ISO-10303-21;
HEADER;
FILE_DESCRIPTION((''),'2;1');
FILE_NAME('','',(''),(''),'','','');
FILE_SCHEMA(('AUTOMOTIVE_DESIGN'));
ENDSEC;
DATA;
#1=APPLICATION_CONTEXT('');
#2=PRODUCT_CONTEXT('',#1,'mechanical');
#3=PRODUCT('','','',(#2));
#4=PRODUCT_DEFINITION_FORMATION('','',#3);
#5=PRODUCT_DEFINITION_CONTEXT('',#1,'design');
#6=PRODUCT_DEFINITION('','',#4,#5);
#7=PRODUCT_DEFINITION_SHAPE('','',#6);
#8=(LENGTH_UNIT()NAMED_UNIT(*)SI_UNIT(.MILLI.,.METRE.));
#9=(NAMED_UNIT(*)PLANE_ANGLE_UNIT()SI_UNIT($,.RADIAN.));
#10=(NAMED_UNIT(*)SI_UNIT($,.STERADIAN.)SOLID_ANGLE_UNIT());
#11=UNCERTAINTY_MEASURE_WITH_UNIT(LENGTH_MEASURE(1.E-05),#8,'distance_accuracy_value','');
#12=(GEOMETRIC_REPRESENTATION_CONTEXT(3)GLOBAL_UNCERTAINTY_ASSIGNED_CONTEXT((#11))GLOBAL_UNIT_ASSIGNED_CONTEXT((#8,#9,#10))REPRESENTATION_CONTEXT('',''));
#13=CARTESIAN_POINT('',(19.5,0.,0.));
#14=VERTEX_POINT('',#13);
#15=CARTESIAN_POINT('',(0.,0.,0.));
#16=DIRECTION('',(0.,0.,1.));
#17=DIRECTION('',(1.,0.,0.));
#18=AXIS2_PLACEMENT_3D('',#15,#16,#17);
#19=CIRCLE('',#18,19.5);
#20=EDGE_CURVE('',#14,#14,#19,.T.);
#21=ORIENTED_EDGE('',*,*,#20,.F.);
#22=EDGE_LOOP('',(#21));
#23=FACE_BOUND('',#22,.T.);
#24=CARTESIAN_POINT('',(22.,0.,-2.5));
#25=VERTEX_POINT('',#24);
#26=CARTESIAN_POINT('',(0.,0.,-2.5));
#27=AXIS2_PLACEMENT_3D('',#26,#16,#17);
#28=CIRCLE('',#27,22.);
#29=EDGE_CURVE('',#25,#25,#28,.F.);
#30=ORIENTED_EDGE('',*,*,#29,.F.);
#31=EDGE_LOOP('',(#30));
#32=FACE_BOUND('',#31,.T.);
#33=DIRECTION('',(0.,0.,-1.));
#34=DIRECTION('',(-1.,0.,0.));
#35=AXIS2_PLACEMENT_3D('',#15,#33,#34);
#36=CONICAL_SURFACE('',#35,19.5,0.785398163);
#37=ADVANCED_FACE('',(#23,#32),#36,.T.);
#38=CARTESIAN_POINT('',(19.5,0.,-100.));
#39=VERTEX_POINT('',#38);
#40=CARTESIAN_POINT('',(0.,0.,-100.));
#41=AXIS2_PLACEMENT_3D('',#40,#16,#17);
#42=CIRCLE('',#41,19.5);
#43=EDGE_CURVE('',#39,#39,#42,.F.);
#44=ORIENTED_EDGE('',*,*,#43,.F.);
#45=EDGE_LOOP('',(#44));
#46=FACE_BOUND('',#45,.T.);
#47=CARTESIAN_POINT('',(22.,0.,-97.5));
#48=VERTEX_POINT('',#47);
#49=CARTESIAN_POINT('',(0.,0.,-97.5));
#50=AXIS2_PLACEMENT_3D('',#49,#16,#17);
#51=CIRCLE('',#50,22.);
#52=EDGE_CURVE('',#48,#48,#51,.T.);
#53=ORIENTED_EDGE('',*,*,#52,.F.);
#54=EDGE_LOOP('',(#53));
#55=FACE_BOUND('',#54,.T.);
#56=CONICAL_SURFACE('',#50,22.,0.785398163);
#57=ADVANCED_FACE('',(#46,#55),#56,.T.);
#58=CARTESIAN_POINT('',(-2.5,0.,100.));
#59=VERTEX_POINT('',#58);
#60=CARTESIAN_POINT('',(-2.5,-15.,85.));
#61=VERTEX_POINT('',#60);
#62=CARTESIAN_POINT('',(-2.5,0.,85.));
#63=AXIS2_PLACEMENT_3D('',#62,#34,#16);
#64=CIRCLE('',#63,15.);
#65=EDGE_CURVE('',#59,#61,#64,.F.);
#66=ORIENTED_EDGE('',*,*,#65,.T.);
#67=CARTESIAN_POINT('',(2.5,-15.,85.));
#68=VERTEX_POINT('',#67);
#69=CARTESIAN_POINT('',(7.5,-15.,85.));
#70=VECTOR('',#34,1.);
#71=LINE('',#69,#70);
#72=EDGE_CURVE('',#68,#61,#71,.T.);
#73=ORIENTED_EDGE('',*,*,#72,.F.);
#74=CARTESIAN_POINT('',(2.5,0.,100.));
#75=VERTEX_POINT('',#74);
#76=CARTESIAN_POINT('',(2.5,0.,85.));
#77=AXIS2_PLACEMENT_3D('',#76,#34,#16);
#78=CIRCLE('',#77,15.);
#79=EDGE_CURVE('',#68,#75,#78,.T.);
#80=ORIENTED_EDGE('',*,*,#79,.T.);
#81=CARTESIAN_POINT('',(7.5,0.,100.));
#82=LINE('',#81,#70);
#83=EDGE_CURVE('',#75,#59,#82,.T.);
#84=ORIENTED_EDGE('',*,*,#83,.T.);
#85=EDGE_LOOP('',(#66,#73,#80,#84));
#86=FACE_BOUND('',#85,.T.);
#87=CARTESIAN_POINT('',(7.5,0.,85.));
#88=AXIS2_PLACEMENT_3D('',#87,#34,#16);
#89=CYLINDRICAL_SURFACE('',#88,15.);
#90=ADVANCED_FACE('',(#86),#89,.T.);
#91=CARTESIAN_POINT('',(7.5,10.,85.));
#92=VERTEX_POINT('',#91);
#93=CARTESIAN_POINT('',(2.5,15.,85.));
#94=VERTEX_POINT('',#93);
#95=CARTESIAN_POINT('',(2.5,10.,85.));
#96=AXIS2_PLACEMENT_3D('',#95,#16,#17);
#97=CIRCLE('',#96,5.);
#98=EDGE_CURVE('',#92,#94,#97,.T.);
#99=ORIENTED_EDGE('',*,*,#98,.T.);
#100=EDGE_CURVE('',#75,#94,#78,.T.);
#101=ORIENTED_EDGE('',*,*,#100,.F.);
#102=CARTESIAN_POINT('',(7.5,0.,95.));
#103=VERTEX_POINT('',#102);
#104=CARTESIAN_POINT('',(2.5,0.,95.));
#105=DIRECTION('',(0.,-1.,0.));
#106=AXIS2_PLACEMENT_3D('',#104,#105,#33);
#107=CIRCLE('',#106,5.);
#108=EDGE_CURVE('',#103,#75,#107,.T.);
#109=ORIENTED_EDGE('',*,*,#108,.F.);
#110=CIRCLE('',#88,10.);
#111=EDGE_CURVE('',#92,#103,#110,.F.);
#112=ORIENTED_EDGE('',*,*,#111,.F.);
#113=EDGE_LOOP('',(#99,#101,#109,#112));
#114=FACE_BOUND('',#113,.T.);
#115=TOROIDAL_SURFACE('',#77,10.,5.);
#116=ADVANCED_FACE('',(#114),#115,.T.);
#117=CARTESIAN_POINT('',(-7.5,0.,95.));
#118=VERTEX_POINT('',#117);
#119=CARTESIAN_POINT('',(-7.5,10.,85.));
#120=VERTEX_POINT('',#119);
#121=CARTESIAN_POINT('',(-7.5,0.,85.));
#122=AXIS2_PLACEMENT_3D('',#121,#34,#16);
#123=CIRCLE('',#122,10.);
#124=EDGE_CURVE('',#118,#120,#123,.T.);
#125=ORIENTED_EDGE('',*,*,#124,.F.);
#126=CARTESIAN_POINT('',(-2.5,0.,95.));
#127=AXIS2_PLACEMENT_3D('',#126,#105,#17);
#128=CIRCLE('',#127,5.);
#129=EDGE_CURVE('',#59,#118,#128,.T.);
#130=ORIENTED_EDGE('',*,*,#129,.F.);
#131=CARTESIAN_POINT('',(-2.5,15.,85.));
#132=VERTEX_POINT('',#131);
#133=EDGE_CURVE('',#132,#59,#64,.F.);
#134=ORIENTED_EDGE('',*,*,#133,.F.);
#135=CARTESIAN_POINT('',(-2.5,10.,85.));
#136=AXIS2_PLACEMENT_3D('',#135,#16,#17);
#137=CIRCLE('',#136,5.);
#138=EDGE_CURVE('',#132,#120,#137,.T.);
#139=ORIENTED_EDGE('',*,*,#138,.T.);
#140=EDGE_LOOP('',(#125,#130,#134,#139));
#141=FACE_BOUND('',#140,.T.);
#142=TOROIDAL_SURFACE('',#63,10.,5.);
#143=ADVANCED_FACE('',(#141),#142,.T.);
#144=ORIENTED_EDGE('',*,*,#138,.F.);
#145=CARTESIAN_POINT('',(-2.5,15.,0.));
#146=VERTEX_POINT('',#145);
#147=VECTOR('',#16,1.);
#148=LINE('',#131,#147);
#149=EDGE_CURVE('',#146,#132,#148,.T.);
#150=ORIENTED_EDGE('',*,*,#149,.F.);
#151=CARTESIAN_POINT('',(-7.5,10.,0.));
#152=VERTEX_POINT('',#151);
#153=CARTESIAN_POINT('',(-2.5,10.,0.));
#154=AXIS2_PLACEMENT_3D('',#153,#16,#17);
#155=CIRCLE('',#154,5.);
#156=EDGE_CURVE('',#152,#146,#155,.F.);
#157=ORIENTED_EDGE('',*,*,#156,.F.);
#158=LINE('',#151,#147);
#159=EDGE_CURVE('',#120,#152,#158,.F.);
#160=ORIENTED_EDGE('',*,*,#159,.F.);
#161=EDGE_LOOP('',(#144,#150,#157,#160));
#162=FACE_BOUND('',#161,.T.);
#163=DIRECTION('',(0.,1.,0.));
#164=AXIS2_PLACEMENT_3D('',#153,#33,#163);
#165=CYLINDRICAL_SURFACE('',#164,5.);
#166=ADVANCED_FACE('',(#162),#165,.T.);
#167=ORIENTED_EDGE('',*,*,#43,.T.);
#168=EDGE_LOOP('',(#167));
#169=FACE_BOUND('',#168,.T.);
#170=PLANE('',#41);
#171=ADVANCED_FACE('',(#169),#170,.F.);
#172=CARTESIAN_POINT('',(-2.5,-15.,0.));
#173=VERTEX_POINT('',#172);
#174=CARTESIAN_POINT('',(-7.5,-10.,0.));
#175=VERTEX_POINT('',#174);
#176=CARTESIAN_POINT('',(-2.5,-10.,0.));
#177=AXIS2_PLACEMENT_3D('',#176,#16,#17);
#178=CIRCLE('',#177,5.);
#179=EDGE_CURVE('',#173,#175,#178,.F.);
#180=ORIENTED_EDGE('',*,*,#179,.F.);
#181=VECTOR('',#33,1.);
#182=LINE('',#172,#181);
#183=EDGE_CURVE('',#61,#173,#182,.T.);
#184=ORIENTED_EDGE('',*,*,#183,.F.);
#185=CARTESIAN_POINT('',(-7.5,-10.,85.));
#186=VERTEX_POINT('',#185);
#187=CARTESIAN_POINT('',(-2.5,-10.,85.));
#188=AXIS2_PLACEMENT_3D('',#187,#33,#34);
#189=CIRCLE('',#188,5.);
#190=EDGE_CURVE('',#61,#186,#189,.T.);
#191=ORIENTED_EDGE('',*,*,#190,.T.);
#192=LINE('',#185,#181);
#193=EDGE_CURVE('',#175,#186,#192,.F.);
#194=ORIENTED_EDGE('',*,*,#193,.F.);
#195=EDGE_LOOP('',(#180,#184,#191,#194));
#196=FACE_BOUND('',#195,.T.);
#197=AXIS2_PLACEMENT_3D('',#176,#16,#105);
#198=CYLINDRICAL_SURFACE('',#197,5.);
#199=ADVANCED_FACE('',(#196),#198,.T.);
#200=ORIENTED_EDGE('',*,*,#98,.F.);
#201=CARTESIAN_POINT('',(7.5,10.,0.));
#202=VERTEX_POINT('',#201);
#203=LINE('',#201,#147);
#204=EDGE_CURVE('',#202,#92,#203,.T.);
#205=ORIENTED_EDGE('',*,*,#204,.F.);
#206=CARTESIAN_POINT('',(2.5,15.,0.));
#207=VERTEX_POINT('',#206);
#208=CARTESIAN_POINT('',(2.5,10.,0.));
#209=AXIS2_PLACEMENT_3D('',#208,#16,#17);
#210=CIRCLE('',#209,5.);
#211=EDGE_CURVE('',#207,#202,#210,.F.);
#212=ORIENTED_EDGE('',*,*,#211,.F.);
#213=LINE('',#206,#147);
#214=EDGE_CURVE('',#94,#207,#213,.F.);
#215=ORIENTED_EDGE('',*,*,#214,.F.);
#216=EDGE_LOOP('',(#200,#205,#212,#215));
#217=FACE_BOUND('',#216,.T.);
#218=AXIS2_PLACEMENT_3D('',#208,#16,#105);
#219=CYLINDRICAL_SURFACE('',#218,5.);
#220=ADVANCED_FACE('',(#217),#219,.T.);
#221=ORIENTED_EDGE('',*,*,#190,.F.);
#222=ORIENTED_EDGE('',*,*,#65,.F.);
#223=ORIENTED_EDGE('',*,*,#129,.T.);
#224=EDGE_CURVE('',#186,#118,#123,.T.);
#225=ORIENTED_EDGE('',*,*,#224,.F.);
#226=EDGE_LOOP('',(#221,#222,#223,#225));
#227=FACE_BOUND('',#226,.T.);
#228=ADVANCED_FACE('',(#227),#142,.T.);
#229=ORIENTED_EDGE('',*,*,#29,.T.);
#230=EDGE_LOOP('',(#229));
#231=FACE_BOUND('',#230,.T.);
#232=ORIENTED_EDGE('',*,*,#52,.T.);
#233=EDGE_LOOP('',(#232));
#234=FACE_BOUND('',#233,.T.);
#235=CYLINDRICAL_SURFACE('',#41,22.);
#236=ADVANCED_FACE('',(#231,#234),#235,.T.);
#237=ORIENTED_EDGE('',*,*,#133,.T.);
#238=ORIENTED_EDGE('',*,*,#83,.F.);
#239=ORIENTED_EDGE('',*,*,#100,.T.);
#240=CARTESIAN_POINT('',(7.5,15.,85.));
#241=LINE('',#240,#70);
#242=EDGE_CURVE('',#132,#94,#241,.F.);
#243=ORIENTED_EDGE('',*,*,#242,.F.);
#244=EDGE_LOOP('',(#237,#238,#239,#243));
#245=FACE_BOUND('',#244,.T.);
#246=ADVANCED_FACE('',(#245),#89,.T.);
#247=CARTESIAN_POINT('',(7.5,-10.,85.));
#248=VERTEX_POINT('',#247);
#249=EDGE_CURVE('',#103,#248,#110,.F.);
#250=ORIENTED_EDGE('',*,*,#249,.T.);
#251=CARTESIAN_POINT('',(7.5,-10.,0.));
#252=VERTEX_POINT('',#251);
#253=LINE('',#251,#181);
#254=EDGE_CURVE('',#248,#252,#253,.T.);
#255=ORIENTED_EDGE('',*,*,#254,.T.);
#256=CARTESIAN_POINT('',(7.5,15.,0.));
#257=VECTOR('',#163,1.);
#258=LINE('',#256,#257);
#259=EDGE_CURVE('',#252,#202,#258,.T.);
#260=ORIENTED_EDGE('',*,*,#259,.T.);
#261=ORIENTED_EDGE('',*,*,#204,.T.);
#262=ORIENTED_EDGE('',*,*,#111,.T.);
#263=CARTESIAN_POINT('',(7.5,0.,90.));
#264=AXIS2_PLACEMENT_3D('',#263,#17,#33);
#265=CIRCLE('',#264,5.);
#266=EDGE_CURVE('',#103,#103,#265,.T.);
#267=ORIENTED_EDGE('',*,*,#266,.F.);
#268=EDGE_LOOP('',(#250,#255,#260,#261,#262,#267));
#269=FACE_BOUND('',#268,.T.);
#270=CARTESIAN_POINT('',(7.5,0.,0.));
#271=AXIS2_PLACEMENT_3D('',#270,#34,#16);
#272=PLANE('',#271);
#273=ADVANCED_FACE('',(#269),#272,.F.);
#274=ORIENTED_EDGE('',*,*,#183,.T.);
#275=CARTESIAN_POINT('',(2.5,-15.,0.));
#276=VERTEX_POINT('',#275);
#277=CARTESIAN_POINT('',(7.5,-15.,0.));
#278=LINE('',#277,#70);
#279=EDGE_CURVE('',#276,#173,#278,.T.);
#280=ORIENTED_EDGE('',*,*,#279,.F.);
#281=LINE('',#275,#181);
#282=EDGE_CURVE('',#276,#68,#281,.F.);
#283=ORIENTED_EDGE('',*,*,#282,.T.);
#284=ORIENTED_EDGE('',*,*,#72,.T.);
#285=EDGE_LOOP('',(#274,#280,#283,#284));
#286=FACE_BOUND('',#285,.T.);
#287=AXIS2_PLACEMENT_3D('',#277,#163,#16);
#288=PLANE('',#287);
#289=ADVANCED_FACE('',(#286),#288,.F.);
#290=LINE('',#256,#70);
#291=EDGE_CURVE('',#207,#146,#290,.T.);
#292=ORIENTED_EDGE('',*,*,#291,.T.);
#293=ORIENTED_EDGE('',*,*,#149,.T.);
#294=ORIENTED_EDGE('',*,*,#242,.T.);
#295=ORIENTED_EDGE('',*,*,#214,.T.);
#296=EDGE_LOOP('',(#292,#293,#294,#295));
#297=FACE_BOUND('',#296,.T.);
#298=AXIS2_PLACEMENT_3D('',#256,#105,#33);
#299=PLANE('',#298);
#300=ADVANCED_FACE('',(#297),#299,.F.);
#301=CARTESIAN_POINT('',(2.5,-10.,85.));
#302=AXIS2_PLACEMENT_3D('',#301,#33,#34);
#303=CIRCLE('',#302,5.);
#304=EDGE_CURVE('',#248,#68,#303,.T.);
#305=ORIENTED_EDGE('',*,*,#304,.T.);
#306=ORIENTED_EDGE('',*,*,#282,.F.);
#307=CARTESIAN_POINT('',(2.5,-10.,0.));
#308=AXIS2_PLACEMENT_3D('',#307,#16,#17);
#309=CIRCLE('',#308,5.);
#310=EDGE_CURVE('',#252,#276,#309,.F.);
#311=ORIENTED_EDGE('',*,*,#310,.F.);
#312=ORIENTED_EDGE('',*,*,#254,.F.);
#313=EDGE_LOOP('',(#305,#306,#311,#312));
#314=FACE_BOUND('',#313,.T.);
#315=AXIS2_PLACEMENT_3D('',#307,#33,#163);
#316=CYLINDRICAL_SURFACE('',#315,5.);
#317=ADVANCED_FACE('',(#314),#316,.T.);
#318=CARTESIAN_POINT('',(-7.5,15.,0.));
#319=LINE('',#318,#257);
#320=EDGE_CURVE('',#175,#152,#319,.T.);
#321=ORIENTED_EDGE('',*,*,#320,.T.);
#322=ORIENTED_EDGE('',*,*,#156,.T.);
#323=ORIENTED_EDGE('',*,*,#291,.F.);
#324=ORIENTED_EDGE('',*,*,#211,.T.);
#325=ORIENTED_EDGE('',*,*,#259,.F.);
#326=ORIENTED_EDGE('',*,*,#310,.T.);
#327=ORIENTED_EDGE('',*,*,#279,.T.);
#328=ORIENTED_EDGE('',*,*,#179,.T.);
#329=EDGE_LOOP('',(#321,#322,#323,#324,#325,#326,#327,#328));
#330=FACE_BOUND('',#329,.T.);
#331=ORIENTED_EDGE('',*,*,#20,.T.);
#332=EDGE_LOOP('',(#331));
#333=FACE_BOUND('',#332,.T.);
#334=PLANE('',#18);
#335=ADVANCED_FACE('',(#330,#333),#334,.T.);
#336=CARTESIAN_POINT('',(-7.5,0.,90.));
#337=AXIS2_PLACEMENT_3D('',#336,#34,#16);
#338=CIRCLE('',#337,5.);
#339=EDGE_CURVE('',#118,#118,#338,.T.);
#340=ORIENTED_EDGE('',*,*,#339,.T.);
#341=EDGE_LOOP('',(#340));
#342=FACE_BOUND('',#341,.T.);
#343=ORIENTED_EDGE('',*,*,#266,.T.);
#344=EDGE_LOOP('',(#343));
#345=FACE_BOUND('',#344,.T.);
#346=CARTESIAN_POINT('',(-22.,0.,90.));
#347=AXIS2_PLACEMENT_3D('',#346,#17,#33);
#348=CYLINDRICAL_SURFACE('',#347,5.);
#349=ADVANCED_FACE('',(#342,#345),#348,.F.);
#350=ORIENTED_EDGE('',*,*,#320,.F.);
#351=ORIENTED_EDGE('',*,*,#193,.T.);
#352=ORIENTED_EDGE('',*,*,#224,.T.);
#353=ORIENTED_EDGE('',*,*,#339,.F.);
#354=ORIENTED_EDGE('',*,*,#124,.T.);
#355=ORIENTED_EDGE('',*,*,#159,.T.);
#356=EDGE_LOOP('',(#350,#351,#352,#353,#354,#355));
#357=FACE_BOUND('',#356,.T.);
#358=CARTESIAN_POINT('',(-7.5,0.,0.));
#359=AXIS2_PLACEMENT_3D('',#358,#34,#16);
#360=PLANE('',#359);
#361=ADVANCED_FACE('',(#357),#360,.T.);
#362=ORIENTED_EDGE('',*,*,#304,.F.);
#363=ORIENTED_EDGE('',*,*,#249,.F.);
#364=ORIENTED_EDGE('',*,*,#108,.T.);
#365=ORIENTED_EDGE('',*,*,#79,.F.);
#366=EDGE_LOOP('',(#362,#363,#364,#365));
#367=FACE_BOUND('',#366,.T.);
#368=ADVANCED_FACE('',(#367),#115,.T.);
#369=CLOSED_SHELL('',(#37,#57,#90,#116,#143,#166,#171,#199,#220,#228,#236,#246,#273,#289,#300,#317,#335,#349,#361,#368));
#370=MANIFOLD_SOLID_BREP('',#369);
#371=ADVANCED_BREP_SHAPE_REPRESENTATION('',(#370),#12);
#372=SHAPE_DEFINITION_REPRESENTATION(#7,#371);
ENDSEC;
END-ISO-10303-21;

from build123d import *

# Parameters (mm, degrees)
SKETCH2_R           = 22
BOSS_EXTRUDE1_DEPTH = 100
SKETCH4_W           = 100
SKETCH4_H           = 30
BOSS_EXTRUDE2_DEPTH = 7.5
FILLET1_R           = 15
SKETCH5_R           = 5
CUT_EXTRUDE1_DEPTH  = 107.556323135
FILLET2_R           = 5
CHAMFER1_SIZE       = 2.5


with BuildPart() as part:
    # Sketch2 → Boss-Extrude1 (new body)
    with BuildSketch(Plane.XY):
        Circle(SKETCH2_R)
    extrude(amount=-BOSS_EXTRUDE1_DEPTH)

    # Sketch4 → Boss-Extrude2 (add, symmetric)
    with BuildSketch(Plane(origin=(0, 0, 0), x_dir=(0, 0, -1), z_dir=(1, 0, 0))):
        with Locations((-50, 0)):
            Rectangle(SKETCH4_W, SKETCH4_H)
    extrude(amount=BOSS_EXTRUDE2_DEPTH, both=True)

    # Fillet1
    fillet1_edges = [part.edges().sort_by_distance(p)[0] for p in [
        (0, -15, 100),
        (0, 15, 100),
    ]]
    fillet(fillet1_edges, radius=FILLET1_R - 0.0001)  # a hair under: the kernel refuses the full size

    # Sketch5 → Cut-Extrude1 (cut, through all)
    with BuildSketch(Plane(origin=(7.5, 0, 0), x_dir=(0, 0, -1), z_dir=(1, 0, 0))):
        with Locations((-90, 0)):
            Circle(SKETCH5_R)
    extrude(amount=-CUT_EXTRUDE1_DEPTH, mode=Mode.SUBTRACT)

    # Fillet2
    fillet2_edges = [part.edges().sort_by_distance(p)[0] for p in [
        (-7.5, -15, 42.50005),
        (7.5, -15, 42.50005),
        (-7.5, 10.606631007, 95.606631007),
        (-7.5, -10.606631007, 95.606631007),
        (7.5, 10.606631007, 95.606631007),
        (7.5, -10.606631007, 95.606631007),
        (-7.5, 15, 42.50005),
        (7.5, 15, 42.50005),
    ]]
    fillet(fillet2_edges, radius=FILLET2_R - 0.0001)  # a hair under: the kernel refuses the full size

    # Chamfer1
    chamfer1_edges = [part.edges().sort_by_distance(p)[0] for p in [
        (-22, 0, 0),
        (-22, 0, -100),
    ]]
    chamfer(chamfer1_edges, length=CHAMFER1_SIZE)


solid = part.part
